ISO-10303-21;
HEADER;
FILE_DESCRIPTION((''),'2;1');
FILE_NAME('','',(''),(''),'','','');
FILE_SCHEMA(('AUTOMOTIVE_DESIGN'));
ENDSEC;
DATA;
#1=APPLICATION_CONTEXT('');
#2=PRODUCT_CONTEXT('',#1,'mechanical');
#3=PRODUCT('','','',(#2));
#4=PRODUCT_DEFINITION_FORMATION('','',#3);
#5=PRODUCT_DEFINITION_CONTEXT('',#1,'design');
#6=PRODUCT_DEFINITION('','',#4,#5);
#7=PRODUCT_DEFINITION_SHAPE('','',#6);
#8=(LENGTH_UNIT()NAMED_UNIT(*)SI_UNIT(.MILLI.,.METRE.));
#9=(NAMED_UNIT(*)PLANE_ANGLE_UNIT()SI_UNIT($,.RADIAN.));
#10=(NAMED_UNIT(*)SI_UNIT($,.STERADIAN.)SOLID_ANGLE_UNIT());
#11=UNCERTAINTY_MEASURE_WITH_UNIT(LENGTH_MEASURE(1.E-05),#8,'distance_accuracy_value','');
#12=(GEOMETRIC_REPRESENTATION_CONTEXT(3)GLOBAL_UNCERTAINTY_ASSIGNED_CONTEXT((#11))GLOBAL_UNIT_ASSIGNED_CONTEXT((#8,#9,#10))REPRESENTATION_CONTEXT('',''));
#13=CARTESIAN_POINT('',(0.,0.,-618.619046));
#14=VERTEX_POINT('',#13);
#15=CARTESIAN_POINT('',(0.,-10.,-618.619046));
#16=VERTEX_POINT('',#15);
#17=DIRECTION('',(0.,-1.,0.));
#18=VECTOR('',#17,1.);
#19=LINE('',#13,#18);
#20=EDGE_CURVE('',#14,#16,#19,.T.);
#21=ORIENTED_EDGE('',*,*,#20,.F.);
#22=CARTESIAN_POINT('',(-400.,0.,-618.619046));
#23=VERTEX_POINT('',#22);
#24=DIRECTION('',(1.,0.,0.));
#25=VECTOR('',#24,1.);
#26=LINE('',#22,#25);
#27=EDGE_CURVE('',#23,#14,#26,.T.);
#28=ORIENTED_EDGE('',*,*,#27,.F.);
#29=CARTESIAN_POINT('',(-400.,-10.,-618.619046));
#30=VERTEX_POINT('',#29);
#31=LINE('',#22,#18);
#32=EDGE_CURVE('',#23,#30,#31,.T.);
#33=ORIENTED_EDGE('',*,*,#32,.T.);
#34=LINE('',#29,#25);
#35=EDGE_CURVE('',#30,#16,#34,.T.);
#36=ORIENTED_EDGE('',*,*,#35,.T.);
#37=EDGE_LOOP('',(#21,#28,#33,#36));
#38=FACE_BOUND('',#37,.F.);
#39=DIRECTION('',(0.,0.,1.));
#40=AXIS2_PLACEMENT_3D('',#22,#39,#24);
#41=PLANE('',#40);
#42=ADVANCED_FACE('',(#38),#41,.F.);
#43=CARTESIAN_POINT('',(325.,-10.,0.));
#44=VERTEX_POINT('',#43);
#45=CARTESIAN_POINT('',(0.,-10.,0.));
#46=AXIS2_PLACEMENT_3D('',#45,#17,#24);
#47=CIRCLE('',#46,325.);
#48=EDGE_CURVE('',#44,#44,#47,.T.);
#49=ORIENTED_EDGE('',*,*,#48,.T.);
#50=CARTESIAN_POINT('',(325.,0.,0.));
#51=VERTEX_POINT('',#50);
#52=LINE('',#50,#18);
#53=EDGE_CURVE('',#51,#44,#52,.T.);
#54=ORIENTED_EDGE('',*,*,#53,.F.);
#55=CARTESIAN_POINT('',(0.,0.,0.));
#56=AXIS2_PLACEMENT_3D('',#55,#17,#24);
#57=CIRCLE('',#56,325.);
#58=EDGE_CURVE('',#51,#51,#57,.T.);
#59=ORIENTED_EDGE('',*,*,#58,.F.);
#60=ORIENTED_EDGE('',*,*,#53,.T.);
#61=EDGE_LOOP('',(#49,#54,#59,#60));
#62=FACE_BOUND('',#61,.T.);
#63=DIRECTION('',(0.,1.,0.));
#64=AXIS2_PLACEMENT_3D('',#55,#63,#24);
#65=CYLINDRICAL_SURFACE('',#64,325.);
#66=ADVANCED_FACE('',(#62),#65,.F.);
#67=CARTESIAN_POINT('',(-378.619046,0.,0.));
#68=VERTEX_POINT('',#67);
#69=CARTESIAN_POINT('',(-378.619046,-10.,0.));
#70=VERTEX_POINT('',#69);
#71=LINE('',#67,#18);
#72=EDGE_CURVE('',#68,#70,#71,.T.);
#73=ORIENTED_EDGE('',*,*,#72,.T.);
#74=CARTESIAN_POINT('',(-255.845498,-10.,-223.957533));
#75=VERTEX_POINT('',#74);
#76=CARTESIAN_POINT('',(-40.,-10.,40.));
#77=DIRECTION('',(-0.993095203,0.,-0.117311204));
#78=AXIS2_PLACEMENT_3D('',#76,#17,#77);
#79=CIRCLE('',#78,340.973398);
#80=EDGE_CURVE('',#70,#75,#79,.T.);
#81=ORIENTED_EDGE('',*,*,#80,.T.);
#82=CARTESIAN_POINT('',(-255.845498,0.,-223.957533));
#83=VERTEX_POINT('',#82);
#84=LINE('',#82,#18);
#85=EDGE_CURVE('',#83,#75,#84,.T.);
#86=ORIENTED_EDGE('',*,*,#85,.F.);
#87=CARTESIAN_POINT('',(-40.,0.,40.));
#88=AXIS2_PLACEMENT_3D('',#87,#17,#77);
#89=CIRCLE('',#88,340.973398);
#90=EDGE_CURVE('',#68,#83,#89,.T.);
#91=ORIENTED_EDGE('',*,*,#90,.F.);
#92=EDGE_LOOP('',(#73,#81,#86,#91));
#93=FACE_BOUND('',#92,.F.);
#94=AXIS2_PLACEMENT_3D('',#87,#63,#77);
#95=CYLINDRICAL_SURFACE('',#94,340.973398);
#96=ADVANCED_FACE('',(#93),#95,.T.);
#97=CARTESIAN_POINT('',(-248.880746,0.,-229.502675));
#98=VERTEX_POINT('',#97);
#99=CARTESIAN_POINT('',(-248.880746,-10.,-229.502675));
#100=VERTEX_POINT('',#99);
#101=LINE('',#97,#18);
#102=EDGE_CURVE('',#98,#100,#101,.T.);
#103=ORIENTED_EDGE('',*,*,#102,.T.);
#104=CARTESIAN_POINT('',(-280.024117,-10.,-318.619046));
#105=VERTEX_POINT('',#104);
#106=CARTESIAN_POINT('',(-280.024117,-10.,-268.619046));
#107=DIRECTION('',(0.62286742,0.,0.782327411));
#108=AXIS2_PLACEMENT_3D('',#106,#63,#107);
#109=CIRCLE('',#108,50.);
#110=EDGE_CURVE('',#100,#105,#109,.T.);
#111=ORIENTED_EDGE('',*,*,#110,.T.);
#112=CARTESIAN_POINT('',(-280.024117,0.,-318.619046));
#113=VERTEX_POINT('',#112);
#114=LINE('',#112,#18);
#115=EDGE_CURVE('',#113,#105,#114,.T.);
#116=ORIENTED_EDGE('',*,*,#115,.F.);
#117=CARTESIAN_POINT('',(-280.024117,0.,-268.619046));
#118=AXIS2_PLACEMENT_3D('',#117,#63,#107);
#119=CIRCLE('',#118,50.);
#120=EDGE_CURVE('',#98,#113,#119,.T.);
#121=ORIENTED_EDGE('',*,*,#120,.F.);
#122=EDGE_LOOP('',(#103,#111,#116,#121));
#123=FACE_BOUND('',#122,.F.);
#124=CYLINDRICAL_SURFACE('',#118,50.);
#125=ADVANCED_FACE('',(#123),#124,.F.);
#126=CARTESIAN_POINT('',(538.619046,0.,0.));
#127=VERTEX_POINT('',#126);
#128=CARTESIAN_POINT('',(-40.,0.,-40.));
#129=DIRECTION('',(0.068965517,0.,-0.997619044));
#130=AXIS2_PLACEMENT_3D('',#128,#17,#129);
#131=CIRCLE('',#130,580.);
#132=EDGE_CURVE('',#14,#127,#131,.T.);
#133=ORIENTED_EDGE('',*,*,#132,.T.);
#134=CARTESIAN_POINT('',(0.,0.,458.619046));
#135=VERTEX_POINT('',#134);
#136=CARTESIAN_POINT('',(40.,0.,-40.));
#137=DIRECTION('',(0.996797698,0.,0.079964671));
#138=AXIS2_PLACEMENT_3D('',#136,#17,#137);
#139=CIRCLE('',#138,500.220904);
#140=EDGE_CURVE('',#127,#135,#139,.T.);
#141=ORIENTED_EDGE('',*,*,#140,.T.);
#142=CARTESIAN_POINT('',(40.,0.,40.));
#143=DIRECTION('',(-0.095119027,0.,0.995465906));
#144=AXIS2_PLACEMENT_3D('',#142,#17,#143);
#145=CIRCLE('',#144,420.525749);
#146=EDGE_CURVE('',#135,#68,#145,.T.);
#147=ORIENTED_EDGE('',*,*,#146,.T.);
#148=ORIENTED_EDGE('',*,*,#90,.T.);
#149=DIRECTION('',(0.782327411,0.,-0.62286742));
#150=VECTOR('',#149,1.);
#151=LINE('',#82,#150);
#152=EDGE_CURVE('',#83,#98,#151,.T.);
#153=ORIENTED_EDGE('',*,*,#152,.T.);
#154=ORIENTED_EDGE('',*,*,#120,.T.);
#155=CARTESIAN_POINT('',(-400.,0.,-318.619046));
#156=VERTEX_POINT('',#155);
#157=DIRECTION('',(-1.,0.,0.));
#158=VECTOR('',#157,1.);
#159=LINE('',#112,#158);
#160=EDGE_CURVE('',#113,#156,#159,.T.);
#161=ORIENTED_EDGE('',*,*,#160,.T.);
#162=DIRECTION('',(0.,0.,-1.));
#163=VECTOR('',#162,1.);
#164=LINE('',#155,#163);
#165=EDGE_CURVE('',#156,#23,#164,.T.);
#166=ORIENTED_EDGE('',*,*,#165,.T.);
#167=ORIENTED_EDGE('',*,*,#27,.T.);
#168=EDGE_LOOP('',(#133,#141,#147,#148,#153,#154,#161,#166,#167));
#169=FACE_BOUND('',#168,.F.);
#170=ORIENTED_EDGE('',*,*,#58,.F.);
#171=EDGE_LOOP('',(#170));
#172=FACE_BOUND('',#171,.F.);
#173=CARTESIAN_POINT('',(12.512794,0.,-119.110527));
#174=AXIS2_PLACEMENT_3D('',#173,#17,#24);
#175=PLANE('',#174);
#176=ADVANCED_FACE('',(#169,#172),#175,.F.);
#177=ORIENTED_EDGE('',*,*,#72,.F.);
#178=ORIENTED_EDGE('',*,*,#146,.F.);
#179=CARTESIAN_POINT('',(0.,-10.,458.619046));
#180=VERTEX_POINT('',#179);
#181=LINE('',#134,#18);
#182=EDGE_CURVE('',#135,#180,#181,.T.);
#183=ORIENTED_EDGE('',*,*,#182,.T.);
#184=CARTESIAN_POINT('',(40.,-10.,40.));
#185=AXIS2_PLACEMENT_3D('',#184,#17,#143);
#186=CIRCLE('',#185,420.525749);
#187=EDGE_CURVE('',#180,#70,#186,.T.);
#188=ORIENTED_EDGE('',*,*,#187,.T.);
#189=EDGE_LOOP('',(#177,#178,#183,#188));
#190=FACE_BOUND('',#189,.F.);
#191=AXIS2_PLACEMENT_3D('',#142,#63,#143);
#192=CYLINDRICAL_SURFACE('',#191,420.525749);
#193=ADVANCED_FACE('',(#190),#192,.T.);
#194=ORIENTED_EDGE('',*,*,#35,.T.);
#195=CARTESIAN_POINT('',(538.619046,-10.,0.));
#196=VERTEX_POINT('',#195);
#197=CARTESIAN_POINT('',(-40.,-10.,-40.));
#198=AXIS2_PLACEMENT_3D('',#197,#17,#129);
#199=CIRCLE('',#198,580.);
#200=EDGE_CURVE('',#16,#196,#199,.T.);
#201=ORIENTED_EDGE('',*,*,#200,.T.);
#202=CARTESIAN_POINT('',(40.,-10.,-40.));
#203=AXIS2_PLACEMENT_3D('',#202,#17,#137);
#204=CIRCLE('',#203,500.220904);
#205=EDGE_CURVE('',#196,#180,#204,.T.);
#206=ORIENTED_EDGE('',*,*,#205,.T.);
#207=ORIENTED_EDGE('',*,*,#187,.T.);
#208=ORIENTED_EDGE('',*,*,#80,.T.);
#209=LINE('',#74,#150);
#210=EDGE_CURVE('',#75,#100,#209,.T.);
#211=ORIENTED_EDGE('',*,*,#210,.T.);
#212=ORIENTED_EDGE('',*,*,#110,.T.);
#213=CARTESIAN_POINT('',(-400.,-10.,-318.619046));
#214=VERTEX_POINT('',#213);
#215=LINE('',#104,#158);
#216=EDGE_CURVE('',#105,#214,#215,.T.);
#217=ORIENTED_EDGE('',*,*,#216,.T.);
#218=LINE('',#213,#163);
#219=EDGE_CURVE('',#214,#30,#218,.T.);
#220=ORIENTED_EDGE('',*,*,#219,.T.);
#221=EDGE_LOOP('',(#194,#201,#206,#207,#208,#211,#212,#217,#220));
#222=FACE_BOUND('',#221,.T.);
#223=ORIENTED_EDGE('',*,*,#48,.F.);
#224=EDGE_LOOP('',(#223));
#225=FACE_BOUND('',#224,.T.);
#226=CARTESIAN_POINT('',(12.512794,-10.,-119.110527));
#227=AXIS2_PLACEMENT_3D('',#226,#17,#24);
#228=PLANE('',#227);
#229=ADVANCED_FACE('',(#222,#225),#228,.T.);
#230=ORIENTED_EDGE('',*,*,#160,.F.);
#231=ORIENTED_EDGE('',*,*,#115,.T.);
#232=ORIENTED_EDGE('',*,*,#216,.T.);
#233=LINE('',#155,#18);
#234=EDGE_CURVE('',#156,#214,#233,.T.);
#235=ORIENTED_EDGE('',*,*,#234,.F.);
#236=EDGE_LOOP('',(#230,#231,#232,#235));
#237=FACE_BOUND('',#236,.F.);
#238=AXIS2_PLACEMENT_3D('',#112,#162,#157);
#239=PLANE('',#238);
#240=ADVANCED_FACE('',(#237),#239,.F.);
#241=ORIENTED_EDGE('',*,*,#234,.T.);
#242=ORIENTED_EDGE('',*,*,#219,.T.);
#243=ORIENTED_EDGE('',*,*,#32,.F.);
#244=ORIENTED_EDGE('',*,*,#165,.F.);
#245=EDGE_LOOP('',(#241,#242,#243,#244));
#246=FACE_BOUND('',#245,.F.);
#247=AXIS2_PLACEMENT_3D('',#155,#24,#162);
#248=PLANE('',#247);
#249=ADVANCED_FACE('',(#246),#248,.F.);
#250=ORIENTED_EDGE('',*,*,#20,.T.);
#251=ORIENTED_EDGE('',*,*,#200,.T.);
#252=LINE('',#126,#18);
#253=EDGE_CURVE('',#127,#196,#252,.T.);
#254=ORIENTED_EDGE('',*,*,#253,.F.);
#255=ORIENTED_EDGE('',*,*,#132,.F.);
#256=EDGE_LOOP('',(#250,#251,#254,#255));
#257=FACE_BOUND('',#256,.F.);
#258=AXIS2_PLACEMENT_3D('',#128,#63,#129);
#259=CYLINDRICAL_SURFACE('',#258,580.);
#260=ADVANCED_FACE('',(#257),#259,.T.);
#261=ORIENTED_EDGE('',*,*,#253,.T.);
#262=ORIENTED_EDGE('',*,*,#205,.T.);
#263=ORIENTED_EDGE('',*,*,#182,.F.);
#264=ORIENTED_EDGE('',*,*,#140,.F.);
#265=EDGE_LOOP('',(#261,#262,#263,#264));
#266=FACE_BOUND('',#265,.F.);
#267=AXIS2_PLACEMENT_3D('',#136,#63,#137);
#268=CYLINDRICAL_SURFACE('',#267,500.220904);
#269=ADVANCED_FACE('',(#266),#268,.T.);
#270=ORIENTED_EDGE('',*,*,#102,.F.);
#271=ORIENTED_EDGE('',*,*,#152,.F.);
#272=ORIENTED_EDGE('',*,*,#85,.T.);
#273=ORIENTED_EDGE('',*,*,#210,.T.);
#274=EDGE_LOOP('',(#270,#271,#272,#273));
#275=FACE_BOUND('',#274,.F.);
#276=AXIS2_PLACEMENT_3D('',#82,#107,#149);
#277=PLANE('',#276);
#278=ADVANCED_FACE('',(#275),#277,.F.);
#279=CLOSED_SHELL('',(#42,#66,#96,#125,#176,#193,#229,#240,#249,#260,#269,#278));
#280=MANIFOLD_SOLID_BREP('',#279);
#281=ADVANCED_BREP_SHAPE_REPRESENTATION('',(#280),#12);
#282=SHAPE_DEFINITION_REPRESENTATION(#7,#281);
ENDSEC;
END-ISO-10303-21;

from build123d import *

# Parameters (mm, degrees)
F0_R     = 325
F1_DEPTH = 10


# Not quite as in the source:
# - a feature names something its author has since deleted; it is built from what else it names


with BuildPart() as f1:
    # F0 (on Front) → F1 (new body)
    with BuildSketch(Plane.XZ):
        with BuildLine():
            ThreePointArc((0, -618.6190456596), (397.429722157, -420.8611796621), (538.6190456596, 0))
            ThreePointArc((538.6190456596, 0), (364.2926371672, 340.8611796621), (0, 458.6190456596))
            ThreePointArc((0, 458.6190456596), (-284.2926371672, 307.7240946723), (-378.6190456596, 0))
            ThreePointArc((-378.6190456596, 0), (-338.9932719851, -123.9081492515), (-255.845498181, -223.9575325662))
            Line((-255.845498181, -223.9575325662), (-248.8807463186, -229.5026751274))
            ThreePointArc((-248.8807463186, -229.5026751274), (-232.823383589, -285.1142187928), (-280.0241173048, -318.6190456596))
            Line((-280.0241173048, -318.6190456596), (-400, -318.6190456596))
            Line((-400, -318.6190456596), (-400, -618.6190456596))
            Line((-400, -618.6190456596), (0, -618.6190456596))
        make_face()
        Circle(F0_R, mode=Mode.SUBTRACT)
    extrude(amount=F1_DEPTH)


solid = f1.part
